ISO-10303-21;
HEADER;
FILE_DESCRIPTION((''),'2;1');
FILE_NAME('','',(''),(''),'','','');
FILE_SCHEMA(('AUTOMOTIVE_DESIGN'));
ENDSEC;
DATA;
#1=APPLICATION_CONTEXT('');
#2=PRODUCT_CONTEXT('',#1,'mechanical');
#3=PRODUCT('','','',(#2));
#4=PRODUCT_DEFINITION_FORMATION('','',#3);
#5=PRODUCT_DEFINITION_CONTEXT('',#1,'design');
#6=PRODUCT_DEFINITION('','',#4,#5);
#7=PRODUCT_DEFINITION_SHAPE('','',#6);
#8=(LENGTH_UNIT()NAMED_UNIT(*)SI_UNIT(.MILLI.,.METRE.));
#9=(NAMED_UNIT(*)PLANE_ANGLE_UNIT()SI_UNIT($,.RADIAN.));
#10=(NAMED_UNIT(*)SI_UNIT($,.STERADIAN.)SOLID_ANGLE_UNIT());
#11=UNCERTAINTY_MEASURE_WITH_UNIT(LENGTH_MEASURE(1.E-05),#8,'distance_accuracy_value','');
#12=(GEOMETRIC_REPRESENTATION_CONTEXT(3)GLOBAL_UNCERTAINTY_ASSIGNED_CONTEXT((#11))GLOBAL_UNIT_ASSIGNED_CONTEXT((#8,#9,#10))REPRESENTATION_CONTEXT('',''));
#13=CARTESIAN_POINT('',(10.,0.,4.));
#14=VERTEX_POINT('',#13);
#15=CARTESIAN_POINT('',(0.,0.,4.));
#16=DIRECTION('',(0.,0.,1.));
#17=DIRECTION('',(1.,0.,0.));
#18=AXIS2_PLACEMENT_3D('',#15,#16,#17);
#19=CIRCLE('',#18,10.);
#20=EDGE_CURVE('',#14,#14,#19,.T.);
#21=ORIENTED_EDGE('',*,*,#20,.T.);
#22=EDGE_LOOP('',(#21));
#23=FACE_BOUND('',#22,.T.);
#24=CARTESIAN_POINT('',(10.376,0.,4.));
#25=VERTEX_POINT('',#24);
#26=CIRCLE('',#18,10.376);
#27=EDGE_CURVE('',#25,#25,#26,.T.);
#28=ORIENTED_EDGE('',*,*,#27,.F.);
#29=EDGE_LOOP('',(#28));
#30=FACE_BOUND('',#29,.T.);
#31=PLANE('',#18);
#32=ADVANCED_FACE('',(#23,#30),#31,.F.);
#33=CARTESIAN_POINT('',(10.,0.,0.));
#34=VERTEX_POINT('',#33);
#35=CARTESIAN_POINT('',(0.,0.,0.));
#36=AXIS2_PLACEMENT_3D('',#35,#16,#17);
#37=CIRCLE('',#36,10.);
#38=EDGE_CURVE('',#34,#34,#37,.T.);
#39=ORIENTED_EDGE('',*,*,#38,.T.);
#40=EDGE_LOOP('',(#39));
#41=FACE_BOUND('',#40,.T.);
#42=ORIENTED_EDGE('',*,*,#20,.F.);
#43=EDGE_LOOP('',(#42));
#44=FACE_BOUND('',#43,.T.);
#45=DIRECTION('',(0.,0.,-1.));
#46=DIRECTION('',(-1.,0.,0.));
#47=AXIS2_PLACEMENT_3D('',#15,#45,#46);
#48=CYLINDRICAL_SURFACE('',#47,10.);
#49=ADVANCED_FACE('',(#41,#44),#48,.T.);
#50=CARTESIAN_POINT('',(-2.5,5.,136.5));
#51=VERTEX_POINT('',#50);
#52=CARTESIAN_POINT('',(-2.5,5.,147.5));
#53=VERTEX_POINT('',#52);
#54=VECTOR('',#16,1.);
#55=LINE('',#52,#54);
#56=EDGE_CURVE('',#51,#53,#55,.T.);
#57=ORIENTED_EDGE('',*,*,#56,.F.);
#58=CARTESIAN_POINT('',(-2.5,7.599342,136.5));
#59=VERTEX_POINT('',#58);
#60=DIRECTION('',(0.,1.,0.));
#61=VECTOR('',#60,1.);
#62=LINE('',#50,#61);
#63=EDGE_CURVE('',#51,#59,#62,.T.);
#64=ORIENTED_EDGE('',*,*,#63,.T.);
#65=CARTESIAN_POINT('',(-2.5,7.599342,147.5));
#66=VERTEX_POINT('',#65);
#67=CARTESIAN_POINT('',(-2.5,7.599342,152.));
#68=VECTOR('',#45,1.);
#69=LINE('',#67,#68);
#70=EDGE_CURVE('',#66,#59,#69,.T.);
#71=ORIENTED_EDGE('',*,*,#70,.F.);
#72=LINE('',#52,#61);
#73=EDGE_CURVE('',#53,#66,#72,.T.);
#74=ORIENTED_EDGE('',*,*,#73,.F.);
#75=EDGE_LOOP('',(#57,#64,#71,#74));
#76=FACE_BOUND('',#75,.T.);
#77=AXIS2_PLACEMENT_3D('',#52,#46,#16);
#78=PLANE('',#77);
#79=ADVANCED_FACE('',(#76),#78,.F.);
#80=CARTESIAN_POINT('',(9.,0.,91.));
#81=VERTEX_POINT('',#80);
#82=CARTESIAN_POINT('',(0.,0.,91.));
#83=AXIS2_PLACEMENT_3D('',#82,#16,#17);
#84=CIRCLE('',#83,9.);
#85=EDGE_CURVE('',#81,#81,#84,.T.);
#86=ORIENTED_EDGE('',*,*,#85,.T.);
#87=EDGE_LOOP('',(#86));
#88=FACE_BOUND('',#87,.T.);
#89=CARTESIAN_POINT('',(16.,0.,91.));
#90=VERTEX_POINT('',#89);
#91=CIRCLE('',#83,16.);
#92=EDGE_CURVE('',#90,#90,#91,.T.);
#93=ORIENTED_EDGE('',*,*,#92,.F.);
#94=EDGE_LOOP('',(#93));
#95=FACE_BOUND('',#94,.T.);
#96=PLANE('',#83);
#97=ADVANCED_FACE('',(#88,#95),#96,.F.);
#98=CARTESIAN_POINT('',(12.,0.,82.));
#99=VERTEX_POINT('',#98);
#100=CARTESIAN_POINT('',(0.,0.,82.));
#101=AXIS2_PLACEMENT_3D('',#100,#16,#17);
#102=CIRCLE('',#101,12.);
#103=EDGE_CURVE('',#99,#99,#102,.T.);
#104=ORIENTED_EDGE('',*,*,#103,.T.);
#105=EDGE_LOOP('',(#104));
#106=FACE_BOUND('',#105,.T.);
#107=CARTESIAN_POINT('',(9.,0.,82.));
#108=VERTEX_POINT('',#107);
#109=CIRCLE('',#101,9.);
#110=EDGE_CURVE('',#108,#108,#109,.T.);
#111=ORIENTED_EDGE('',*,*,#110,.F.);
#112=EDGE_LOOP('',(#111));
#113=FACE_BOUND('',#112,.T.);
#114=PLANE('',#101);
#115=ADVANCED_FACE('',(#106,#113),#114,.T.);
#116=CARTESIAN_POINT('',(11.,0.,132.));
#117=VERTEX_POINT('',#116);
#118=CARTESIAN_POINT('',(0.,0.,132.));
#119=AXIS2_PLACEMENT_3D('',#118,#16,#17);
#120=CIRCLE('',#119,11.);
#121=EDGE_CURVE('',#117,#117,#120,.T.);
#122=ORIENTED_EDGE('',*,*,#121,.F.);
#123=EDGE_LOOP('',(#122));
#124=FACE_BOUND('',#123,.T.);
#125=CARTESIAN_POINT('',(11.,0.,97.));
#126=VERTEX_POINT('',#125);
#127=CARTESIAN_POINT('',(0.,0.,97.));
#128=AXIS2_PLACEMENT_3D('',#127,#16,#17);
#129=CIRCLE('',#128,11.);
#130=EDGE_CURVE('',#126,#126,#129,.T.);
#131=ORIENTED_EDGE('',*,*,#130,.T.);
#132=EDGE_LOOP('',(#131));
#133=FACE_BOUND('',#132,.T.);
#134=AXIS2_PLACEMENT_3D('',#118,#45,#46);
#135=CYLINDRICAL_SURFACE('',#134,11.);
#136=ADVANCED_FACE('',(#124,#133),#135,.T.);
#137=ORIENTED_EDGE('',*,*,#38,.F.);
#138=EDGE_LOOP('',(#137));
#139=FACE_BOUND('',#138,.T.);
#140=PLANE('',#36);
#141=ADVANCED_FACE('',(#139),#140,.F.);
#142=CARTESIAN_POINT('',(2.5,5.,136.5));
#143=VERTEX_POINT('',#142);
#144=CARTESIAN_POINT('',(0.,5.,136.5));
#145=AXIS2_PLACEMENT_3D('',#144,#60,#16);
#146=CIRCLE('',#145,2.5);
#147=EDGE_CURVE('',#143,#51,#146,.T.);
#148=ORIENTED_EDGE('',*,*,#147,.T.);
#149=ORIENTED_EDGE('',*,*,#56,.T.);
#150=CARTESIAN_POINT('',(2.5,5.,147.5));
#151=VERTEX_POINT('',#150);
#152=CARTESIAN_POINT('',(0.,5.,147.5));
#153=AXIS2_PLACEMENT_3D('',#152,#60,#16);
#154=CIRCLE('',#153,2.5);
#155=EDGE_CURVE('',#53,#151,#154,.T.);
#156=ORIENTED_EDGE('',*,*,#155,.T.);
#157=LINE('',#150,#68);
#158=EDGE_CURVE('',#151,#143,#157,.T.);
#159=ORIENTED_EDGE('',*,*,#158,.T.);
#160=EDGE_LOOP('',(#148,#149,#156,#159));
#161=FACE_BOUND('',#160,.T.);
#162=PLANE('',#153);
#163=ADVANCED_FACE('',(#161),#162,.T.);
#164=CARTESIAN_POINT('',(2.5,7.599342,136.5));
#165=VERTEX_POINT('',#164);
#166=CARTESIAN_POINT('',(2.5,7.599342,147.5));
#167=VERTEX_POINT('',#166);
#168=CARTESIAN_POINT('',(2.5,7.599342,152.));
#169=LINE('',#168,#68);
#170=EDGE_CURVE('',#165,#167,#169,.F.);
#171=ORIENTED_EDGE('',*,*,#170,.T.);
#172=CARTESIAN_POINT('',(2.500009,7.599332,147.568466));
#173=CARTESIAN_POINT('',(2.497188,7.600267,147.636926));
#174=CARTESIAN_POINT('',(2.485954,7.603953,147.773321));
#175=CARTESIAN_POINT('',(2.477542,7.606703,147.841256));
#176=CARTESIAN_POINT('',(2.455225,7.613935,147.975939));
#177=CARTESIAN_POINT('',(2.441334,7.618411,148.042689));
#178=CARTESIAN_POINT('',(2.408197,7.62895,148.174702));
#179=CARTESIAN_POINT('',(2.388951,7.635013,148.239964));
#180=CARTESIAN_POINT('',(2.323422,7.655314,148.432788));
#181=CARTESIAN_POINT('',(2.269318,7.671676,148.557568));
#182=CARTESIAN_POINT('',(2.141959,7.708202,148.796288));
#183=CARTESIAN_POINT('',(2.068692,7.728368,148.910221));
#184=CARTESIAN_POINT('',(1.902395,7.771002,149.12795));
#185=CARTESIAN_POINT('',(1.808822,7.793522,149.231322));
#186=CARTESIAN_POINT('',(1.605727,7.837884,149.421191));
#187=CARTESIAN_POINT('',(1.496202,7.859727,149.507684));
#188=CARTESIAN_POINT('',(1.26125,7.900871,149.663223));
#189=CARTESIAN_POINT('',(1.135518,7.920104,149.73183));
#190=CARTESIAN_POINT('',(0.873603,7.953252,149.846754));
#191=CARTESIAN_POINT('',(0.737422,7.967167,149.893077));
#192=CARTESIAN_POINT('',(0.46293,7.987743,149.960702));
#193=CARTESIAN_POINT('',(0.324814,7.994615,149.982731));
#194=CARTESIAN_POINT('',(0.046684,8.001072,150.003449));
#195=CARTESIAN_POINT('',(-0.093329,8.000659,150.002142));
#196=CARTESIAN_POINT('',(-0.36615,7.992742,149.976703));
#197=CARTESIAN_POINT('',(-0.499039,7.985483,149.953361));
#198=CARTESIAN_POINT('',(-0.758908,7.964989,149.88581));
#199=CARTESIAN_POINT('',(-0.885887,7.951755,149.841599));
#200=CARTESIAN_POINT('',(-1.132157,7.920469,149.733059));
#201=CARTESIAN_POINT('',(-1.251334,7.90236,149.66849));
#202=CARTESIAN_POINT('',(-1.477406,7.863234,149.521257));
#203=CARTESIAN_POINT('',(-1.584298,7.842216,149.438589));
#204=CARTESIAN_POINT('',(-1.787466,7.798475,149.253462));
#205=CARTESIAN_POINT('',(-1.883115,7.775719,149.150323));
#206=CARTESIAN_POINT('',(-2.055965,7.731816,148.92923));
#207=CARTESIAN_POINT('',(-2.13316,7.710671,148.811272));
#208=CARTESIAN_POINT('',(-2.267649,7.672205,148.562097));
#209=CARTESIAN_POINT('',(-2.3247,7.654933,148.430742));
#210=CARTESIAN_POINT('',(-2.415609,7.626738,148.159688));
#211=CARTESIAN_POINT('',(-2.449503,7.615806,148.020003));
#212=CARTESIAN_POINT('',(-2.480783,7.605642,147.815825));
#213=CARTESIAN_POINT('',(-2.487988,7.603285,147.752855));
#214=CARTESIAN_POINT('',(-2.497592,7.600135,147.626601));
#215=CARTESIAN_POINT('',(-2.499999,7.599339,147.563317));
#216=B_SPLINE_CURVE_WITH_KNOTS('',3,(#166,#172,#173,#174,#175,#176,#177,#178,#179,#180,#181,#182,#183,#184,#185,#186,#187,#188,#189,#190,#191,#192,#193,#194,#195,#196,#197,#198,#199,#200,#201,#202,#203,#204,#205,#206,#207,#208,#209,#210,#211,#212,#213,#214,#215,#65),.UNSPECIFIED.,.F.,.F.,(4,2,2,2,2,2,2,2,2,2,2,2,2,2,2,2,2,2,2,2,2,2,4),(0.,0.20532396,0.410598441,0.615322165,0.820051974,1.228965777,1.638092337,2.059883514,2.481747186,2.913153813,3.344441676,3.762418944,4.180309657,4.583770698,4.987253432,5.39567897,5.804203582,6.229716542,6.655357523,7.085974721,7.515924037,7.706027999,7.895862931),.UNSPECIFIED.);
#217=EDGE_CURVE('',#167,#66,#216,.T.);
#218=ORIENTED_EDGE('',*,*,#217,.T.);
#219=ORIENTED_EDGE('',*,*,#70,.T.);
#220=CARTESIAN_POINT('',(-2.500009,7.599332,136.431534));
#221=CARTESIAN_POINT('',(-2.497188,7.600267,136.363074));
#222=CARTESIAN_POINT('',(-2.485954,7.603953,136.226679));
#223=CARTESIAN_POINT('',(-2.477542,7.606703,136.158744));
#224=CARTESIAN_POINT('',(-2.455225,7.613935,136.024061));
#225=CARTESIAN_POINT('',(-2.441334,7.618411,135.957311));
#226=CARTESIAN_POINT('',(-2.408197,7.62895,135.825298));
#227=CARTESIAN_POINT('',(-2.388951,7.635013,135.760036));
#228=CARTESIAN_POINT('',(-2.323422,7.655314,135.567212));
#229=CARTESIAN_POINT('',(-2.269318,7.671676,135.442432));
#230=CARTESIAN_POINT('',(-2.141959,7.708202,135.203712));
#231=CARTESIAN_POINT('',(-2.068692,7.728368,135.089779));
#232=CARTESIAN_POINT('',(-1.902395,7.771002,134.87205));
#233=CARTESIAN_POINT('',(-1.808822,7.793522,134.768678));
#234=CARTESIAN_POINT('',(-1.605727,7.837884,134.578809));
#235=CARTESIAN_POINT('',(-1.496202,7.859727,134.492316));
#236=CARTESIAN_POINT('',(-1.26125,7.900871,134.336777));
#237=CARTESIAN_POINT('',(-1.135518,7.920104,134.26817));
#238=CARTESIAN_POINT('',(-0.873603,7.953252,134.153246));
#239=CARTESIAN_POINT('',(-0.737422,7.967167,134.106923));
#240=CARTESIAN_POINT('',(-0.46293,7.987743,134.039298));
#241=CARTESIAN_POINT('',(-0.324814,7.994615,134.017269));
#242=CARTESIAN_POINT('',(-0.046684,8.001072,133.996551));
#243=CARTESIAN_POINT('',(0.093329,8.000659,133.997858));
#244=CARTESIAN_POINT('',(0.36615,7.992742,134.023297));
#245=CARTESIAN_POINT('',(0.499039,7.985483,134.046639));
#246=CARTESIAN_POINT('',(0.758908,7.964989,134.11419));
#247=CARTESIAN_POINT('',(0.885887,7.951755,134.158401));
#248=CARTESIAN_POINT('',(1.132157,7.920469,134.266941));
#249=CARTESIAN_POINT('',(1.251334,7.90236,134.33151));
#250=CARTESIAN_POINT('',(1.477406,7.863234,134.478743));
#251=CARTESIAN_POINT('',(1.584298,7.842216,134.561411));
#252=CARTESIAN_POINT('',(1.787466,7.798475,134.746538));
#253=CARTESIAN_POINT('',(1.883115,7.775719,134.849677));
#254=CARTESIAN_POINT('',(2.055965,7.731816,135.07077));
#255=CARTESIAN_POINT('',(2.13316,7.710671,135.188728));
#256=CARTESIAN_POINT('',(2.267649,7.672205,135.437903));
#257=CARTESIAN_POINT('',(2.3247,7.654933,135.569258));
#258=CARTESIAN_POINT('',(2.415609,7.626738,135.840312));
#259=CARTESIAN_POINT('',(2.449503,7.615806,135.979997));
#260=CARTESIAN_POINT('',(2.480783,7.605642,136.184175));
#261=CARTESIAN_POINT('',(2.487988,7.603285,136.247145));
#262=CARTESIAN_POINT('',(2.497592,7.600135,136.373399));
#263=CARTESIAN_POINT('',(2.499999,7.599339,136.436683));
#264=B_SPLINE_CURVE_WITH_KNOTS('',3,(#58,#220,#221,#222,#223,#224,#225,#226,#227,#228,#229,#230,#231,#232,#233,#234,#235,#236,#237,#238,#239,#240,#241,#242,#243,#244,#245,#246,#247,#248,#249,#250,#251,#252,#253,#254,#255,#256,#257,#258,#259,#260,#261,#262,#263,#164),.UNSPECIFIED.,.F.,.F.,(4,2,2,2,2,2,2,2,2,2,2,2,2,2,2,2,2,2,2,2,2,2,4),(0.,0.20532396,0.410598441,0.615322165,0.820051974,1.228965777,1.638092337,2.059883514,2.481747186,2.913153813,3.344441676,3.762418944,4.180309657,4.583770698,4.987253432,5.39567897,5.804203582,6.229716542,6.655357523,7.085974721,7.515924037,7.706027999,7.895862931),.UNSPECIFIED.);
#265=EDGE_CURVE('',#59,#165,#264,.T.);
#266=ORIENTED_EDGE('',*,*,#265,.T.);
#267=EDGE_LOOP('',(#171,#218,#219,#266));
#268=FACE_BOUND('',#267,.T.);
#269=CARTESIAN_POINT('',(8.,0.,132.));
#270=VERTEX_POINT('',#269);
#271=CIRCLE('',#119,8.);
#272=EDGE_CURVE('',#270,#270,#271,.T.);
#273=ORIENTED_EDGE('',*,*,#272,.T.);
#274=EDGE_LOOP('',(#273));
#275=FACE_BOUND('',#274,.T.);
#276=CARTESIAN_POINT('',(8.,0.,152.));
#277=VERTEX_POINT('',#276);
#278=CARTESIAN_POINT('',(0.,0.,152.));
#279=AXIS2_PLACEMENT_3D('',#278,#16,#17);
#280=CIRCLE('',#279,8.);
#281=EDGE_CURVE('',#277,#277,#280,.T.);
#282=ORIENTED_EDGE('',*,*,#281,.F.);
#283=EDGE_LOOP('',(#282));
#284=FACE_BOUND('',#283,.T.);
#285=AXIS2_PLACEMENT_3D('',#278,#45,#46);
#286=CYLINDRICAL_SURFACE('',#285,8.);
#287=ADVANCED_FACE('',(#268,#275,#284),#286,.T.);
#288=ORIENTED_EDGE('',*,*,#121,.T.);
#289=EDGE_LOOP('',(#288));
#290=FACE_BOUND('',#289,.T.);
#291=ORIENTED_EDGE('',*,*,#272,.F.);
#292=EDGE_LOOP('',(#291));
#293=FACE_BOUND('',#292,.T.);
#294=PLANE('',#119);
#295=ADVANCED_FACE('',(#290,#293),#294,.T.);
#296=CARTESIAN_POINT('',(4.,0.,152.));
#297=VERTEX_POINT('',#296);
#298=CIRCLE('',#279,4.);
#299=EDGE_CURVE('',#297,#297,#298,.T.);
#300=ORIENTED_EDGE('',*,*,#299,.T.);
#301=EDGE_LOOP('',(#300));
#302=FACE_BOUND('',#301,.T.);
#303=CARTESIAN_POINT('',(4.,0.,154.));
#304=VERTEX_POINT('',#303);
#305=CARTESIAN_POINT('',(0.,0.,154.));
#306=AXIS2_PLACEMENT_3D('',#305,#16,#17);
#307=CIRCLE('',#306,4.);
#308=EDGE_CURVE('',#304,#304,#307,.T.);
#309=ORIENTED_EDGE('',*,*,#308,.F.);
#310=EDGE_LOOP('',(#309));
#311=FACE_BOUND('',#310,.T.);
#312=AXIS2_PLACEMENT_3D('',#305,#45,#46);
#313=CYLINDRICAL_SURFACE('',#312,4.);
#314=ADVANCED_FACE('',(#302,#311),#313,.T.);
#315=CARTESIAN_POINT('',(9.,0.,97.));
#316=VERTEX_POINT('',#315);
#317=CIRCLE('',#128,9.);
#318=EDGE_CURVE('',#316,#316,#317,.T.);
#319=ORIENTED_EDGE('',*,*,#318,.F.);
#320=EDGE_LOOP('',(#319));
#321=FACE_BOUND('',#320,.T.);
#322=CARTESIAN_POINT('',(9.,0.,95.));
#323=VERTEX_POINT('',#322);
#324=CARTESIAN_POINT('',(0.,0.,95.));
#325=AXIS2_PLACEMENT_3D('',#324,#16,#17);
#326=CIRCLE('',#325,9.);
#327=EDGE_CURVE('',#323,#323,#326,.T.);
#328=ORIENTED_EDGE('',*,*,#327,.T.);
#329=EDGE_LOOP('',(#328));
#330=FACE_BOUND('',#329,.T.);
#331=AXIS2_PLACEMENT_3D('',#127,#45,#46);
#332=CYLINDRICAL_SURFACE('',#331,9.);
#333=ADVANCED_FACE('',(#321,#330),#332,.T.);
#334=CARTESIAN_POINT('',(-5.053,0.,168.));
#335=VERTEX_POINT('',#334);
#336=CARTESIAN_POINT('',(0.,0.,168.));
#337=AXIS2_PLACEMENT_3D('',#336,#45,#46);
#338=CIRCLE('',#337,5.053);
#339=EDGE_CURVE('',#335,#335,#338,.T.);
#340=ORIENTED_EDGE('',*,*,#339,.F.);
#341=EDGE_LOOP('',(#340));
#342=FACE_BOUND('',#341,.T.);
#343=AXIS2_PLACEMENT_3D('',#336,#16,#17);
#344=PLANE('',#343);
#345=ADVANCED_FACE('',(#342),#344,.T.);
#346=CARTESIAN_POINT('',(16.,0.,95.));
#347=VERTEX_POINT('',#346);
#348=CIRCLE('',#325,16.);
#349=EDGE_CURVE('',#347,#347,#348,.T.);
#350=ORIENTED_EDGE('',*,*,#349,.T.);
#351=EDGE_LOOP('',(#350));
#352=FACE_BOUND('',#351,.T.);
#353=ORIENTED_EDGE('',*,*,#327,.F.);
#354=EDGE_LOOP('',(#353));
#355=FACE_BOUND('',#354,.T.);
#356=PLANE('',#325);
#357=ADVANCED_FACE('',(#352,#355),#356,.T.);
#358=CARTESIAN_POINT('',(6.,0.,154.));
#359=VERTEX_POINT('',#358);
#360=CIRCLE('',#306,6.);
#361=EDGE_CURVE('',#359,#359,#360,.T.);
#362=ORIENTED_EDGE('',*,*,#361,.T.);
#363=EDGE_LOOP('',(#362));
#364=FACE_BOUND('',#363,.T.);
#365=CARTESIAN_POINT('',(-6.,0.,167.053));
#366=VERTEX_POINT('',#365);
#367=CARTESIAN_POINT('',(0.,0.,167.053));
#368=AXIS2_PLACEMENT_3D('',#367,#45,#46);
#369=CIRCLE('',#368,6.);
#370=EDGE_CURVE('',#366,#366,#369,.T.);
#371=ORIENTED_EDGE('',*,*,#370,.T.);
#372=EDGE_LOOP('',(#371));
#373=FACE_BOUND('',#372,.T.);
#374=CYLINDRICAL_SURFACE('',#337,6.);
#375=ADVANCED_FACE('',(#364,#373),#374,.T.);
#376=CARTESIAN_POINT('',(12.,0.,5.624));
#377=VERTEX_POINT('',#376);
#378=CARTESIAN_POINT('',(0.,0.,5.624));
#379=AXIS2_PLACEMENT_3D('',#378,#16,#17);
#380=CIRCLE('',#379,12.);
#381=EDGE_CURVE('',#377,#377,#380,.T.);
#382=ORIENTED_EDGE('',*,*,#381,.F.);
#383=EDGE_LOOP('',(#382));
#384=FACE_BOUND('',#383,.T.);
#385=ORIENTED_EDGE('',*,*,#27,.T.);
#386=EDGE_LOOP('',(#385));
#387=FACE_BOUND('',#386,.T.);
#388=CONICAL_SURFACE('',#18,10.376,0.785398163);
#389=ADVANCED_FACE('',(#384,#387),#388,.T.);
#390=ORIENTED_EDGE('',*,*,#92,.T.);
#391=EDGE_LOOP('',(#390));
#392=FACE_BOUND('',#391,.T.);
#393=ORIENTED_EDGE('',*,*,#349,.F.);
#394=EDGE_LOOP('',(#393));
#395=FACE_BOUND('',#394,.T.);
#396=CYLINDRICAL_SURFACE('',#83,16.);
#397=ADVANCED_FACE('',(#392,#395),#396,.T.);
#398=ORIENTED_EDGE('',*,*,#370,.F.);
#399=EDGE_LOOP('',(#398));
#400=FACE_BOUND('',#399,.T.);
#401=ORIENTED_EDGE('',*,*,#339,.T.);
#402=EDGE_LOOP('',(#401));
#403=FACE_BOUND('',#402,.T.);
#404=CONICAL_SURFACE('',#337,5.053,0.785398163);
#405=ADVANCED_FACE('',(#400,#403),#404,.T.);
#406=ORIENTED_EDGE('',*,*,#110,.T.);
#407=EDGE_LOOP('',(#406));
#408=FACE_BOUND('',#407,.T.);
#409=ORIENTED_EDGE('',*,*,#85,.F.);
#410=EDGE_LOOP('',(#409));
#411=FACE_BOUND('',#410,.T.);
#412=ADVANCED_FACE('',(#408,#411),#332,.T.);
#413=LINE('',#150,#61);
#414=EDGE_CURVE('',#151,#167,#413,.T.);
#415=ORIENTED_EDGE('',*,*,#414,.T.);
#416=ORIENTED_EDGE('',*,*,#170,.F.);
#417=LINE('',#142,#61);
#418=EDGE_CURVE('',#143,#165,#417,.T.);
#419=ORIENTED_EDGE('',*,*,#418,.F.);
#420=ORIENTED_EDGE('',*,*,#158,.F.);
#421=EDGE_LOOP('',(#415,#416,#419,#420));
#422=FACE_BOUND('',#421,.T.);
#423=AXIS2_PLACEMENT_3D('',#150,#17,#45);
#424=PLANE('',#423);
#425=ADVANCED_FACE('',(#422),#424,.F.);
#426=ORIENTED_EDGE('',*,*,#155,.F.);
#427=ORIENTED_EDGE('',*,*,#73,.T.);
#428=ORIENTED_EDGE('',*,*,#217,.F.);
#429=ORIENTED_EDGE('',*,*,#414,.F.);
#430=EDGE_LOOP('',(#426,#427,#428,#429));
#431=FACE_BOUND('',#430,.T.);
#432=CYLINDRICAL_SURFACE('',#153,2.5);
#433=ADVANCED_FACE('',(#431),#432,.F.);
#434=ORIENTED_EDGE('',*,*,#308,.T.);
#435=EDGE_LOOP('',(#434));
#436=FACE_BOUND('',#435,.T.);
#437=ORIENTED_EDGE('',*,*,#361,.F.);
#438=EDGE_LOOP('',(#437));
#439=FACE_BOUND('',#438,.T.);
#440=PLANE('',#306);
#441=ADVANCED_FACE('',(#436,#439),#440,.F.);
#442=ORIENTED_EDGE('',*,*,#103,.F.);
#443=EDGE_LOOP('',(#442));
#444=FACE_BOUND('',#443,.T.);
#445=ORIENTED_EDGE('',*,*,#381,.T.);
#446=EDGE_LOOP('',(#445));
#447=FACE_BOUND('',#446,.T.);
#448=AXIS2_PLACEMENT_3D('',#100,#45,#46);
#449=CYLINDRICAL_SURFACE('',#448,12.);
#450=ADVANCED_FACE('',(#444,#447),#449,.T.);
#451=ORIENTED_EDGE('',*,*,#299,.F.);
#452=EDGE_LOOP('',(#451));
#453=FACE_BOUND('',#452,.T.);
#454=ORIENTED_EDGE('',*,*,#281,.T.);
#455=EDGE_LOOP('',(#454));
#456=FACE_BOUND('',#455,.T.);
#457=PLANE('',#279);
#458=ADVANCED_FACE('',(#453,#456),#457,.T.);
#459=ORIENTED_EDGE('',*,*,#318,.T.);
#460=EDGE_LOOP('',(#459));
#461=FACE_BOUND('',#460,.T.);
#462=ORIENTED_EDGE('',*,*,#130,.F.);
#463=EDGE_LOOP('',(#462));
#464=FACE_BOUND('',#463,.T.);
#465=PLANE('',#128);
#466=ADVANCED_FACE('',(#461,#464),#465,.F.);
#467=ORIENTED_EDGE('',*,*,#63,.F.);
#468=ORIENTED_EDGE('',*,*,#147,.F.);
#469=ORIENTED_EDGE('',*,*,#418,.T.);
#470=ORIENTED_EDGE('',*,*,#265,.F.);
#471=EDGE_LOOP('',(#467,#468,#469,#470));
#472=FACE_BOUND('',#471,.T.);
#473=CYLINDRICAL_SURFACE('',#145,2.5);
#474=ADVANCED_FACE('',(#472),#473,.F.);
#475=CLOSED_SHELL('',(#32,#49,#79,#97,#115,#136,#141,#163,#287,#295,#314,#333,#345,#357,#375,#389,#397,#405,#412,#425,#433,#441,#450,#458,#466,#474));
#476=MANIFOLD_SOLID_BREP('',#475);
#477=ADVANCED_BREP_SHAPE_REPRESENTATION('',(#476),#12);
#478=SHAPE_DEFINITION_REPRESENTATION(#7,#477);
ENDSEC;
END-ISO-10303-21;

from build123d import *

# Parameters (mm, degrees)
SKETCH_1_R          = 10
EXTRUDE_1_DEPTH     = 4
SKETCH_2_R          = 12
EXTRUDE_2_DEPTH     = 78
SKETCH_4_R          = 9
EXTRUDE_3_DEPTH     = 15
EXTRUDE_START       = -2
SKETCH_5_R          = 16
EXTRUDE_4_DEPTH     = 4
SKETCH_6_R          = 11
EXTRUDE_5_DEPTH     = 35
SKETCH_7_R          = 8
EXTRUDE_6_DEPTH     = 20
SKETCH_8_R          = 6
EXTRUDE_7_DEPTH     = 16
CUT_EXTRUDE_START   = 20
SKETCH_9_R          = 6
SKETCH_9_R_2        = 4
CUT_EXTRUDE_1_DEPTH = 2
CUT_EXTRUDE_START_2 = 8
CUT_EXTRUDE_2_DEPTH = 3


# Read off the part's stored shape, not the designer's step: M24 机械螺纹 螺柱1, M12 机械螺纹 螺柱1
with BuildPart() as part:
    # 草图1 → 凸台-拉伸1 (new body)
    with BuildSketch(Plane.XY):
        Circle(SKETCH_1_R)
    extrude(amount=EXTRUDE_1_DEPTH)

    # 草图2 → 凸台-拉伸2 (add)
    with BuildSketch(Plane.XY.offset(4)):
        Circle(SKETCH_2_R)
    extrude(amount=EXTRUDE_2_DEPTH)

    # M24 机械螺纹 螺柱1 outline → M24 机械螺纹 螺柱1 (revolve, cut)
    with BuildSketch(Plane.XZ):
        Polygon((12, 5.624), (10.376, 4), (12, 4), align=None)
    revolve(axis=Axis((0, 0, 0), (0, 0, 1)), mode=Mode.SUBTRACT)

    # 草图4 → 凸台-拉伸3 (add)
    with BuildSketch(Plane.XY.offset(82)):
        Circle(SKETCH_4_R)
    extrude(amount=EXTRUDE_3_DEPTH)

    # 草图5 → 凸台-拉伸4 (add)
    with BuildSketch(Plane.XY.offset(97).offset(EXTRUDE_START)):
        Circle(SKETCH_5_R)
    extrude(amount=-EXTRUDE_4_DEPTH)

    # 草图6 → 凸台-拉伸5 (add)
    with BuildSketch(Plane.XY.offset(97)):
        Circle(SKETCH_6_R)
    extrude(amount=EXTRUDE_5_DEPTH)

    # 草图7 → 凸台-拉伸6 (add)
    with BuildSketch(Plane.XY.offset(132)):
        Circle(SKETCH_7_R)
    extrude(amount=EXTRUDE_6_DEPTH)

    # 草图8 → 凸台-拉伸7 (add)
    with BuildSketch(Plane.XY.offset(152)):
        Circle(SKETCH_8_R)
    extrude(amount=EXTRUDE_7_DEPTH)

    # 草图9 → 切除-拉伸1 (cut)
    with BuildSketch(Plane.XY.offset(132).offset(CUT_EXTRUDE_START)):
        Circle(SKETCH_9_R)
        Circle(SKETCH_9_R_2, mode=Mode.SUBTRACT)
    extrude(amount=CUT_EXTRUDE_1_DEPTH, mode=Mode.SUBTRACT)

    # M12 机械螺纹 螺柱1 outline → M12 机械螺纹 螺柱1 (revolve, cut)
    with BuildSketch(Plane.XZ):
        Polygon((6, 168), (5.053, 168), (6, 167.053), align=None)
    revolve(axis=Axis((0, 0, 0), (0, 0, 1)), mode=Mode.SUBTRACT)

    # 草图11 → 切除-拉伸2 (cut)
    with BuildSketch(Plane(origin=(0, 0, 0), x_dir=(1, 0, 0), z_dir=(0, 1, 0)).offset(CUT_EXTRUDE_START_2)):
        with BuildLine():
            Line((-2.5, -147.5), (-2.5, -136.5))
            ThreePointArc((-2.5, -136.5), (0, -134), (2.5, -136.5))
            Line((2.5, -136.5), (2.5, -147.5))
            ThreePointArc((2.5, -147.5), (0, -150), (-2.5, -147.5))
        make_face()
    extrude(amount=-CUT_EXTRUDE_2_DEPTH, mode=Mode.SUBTRACT)


solid = part.part
